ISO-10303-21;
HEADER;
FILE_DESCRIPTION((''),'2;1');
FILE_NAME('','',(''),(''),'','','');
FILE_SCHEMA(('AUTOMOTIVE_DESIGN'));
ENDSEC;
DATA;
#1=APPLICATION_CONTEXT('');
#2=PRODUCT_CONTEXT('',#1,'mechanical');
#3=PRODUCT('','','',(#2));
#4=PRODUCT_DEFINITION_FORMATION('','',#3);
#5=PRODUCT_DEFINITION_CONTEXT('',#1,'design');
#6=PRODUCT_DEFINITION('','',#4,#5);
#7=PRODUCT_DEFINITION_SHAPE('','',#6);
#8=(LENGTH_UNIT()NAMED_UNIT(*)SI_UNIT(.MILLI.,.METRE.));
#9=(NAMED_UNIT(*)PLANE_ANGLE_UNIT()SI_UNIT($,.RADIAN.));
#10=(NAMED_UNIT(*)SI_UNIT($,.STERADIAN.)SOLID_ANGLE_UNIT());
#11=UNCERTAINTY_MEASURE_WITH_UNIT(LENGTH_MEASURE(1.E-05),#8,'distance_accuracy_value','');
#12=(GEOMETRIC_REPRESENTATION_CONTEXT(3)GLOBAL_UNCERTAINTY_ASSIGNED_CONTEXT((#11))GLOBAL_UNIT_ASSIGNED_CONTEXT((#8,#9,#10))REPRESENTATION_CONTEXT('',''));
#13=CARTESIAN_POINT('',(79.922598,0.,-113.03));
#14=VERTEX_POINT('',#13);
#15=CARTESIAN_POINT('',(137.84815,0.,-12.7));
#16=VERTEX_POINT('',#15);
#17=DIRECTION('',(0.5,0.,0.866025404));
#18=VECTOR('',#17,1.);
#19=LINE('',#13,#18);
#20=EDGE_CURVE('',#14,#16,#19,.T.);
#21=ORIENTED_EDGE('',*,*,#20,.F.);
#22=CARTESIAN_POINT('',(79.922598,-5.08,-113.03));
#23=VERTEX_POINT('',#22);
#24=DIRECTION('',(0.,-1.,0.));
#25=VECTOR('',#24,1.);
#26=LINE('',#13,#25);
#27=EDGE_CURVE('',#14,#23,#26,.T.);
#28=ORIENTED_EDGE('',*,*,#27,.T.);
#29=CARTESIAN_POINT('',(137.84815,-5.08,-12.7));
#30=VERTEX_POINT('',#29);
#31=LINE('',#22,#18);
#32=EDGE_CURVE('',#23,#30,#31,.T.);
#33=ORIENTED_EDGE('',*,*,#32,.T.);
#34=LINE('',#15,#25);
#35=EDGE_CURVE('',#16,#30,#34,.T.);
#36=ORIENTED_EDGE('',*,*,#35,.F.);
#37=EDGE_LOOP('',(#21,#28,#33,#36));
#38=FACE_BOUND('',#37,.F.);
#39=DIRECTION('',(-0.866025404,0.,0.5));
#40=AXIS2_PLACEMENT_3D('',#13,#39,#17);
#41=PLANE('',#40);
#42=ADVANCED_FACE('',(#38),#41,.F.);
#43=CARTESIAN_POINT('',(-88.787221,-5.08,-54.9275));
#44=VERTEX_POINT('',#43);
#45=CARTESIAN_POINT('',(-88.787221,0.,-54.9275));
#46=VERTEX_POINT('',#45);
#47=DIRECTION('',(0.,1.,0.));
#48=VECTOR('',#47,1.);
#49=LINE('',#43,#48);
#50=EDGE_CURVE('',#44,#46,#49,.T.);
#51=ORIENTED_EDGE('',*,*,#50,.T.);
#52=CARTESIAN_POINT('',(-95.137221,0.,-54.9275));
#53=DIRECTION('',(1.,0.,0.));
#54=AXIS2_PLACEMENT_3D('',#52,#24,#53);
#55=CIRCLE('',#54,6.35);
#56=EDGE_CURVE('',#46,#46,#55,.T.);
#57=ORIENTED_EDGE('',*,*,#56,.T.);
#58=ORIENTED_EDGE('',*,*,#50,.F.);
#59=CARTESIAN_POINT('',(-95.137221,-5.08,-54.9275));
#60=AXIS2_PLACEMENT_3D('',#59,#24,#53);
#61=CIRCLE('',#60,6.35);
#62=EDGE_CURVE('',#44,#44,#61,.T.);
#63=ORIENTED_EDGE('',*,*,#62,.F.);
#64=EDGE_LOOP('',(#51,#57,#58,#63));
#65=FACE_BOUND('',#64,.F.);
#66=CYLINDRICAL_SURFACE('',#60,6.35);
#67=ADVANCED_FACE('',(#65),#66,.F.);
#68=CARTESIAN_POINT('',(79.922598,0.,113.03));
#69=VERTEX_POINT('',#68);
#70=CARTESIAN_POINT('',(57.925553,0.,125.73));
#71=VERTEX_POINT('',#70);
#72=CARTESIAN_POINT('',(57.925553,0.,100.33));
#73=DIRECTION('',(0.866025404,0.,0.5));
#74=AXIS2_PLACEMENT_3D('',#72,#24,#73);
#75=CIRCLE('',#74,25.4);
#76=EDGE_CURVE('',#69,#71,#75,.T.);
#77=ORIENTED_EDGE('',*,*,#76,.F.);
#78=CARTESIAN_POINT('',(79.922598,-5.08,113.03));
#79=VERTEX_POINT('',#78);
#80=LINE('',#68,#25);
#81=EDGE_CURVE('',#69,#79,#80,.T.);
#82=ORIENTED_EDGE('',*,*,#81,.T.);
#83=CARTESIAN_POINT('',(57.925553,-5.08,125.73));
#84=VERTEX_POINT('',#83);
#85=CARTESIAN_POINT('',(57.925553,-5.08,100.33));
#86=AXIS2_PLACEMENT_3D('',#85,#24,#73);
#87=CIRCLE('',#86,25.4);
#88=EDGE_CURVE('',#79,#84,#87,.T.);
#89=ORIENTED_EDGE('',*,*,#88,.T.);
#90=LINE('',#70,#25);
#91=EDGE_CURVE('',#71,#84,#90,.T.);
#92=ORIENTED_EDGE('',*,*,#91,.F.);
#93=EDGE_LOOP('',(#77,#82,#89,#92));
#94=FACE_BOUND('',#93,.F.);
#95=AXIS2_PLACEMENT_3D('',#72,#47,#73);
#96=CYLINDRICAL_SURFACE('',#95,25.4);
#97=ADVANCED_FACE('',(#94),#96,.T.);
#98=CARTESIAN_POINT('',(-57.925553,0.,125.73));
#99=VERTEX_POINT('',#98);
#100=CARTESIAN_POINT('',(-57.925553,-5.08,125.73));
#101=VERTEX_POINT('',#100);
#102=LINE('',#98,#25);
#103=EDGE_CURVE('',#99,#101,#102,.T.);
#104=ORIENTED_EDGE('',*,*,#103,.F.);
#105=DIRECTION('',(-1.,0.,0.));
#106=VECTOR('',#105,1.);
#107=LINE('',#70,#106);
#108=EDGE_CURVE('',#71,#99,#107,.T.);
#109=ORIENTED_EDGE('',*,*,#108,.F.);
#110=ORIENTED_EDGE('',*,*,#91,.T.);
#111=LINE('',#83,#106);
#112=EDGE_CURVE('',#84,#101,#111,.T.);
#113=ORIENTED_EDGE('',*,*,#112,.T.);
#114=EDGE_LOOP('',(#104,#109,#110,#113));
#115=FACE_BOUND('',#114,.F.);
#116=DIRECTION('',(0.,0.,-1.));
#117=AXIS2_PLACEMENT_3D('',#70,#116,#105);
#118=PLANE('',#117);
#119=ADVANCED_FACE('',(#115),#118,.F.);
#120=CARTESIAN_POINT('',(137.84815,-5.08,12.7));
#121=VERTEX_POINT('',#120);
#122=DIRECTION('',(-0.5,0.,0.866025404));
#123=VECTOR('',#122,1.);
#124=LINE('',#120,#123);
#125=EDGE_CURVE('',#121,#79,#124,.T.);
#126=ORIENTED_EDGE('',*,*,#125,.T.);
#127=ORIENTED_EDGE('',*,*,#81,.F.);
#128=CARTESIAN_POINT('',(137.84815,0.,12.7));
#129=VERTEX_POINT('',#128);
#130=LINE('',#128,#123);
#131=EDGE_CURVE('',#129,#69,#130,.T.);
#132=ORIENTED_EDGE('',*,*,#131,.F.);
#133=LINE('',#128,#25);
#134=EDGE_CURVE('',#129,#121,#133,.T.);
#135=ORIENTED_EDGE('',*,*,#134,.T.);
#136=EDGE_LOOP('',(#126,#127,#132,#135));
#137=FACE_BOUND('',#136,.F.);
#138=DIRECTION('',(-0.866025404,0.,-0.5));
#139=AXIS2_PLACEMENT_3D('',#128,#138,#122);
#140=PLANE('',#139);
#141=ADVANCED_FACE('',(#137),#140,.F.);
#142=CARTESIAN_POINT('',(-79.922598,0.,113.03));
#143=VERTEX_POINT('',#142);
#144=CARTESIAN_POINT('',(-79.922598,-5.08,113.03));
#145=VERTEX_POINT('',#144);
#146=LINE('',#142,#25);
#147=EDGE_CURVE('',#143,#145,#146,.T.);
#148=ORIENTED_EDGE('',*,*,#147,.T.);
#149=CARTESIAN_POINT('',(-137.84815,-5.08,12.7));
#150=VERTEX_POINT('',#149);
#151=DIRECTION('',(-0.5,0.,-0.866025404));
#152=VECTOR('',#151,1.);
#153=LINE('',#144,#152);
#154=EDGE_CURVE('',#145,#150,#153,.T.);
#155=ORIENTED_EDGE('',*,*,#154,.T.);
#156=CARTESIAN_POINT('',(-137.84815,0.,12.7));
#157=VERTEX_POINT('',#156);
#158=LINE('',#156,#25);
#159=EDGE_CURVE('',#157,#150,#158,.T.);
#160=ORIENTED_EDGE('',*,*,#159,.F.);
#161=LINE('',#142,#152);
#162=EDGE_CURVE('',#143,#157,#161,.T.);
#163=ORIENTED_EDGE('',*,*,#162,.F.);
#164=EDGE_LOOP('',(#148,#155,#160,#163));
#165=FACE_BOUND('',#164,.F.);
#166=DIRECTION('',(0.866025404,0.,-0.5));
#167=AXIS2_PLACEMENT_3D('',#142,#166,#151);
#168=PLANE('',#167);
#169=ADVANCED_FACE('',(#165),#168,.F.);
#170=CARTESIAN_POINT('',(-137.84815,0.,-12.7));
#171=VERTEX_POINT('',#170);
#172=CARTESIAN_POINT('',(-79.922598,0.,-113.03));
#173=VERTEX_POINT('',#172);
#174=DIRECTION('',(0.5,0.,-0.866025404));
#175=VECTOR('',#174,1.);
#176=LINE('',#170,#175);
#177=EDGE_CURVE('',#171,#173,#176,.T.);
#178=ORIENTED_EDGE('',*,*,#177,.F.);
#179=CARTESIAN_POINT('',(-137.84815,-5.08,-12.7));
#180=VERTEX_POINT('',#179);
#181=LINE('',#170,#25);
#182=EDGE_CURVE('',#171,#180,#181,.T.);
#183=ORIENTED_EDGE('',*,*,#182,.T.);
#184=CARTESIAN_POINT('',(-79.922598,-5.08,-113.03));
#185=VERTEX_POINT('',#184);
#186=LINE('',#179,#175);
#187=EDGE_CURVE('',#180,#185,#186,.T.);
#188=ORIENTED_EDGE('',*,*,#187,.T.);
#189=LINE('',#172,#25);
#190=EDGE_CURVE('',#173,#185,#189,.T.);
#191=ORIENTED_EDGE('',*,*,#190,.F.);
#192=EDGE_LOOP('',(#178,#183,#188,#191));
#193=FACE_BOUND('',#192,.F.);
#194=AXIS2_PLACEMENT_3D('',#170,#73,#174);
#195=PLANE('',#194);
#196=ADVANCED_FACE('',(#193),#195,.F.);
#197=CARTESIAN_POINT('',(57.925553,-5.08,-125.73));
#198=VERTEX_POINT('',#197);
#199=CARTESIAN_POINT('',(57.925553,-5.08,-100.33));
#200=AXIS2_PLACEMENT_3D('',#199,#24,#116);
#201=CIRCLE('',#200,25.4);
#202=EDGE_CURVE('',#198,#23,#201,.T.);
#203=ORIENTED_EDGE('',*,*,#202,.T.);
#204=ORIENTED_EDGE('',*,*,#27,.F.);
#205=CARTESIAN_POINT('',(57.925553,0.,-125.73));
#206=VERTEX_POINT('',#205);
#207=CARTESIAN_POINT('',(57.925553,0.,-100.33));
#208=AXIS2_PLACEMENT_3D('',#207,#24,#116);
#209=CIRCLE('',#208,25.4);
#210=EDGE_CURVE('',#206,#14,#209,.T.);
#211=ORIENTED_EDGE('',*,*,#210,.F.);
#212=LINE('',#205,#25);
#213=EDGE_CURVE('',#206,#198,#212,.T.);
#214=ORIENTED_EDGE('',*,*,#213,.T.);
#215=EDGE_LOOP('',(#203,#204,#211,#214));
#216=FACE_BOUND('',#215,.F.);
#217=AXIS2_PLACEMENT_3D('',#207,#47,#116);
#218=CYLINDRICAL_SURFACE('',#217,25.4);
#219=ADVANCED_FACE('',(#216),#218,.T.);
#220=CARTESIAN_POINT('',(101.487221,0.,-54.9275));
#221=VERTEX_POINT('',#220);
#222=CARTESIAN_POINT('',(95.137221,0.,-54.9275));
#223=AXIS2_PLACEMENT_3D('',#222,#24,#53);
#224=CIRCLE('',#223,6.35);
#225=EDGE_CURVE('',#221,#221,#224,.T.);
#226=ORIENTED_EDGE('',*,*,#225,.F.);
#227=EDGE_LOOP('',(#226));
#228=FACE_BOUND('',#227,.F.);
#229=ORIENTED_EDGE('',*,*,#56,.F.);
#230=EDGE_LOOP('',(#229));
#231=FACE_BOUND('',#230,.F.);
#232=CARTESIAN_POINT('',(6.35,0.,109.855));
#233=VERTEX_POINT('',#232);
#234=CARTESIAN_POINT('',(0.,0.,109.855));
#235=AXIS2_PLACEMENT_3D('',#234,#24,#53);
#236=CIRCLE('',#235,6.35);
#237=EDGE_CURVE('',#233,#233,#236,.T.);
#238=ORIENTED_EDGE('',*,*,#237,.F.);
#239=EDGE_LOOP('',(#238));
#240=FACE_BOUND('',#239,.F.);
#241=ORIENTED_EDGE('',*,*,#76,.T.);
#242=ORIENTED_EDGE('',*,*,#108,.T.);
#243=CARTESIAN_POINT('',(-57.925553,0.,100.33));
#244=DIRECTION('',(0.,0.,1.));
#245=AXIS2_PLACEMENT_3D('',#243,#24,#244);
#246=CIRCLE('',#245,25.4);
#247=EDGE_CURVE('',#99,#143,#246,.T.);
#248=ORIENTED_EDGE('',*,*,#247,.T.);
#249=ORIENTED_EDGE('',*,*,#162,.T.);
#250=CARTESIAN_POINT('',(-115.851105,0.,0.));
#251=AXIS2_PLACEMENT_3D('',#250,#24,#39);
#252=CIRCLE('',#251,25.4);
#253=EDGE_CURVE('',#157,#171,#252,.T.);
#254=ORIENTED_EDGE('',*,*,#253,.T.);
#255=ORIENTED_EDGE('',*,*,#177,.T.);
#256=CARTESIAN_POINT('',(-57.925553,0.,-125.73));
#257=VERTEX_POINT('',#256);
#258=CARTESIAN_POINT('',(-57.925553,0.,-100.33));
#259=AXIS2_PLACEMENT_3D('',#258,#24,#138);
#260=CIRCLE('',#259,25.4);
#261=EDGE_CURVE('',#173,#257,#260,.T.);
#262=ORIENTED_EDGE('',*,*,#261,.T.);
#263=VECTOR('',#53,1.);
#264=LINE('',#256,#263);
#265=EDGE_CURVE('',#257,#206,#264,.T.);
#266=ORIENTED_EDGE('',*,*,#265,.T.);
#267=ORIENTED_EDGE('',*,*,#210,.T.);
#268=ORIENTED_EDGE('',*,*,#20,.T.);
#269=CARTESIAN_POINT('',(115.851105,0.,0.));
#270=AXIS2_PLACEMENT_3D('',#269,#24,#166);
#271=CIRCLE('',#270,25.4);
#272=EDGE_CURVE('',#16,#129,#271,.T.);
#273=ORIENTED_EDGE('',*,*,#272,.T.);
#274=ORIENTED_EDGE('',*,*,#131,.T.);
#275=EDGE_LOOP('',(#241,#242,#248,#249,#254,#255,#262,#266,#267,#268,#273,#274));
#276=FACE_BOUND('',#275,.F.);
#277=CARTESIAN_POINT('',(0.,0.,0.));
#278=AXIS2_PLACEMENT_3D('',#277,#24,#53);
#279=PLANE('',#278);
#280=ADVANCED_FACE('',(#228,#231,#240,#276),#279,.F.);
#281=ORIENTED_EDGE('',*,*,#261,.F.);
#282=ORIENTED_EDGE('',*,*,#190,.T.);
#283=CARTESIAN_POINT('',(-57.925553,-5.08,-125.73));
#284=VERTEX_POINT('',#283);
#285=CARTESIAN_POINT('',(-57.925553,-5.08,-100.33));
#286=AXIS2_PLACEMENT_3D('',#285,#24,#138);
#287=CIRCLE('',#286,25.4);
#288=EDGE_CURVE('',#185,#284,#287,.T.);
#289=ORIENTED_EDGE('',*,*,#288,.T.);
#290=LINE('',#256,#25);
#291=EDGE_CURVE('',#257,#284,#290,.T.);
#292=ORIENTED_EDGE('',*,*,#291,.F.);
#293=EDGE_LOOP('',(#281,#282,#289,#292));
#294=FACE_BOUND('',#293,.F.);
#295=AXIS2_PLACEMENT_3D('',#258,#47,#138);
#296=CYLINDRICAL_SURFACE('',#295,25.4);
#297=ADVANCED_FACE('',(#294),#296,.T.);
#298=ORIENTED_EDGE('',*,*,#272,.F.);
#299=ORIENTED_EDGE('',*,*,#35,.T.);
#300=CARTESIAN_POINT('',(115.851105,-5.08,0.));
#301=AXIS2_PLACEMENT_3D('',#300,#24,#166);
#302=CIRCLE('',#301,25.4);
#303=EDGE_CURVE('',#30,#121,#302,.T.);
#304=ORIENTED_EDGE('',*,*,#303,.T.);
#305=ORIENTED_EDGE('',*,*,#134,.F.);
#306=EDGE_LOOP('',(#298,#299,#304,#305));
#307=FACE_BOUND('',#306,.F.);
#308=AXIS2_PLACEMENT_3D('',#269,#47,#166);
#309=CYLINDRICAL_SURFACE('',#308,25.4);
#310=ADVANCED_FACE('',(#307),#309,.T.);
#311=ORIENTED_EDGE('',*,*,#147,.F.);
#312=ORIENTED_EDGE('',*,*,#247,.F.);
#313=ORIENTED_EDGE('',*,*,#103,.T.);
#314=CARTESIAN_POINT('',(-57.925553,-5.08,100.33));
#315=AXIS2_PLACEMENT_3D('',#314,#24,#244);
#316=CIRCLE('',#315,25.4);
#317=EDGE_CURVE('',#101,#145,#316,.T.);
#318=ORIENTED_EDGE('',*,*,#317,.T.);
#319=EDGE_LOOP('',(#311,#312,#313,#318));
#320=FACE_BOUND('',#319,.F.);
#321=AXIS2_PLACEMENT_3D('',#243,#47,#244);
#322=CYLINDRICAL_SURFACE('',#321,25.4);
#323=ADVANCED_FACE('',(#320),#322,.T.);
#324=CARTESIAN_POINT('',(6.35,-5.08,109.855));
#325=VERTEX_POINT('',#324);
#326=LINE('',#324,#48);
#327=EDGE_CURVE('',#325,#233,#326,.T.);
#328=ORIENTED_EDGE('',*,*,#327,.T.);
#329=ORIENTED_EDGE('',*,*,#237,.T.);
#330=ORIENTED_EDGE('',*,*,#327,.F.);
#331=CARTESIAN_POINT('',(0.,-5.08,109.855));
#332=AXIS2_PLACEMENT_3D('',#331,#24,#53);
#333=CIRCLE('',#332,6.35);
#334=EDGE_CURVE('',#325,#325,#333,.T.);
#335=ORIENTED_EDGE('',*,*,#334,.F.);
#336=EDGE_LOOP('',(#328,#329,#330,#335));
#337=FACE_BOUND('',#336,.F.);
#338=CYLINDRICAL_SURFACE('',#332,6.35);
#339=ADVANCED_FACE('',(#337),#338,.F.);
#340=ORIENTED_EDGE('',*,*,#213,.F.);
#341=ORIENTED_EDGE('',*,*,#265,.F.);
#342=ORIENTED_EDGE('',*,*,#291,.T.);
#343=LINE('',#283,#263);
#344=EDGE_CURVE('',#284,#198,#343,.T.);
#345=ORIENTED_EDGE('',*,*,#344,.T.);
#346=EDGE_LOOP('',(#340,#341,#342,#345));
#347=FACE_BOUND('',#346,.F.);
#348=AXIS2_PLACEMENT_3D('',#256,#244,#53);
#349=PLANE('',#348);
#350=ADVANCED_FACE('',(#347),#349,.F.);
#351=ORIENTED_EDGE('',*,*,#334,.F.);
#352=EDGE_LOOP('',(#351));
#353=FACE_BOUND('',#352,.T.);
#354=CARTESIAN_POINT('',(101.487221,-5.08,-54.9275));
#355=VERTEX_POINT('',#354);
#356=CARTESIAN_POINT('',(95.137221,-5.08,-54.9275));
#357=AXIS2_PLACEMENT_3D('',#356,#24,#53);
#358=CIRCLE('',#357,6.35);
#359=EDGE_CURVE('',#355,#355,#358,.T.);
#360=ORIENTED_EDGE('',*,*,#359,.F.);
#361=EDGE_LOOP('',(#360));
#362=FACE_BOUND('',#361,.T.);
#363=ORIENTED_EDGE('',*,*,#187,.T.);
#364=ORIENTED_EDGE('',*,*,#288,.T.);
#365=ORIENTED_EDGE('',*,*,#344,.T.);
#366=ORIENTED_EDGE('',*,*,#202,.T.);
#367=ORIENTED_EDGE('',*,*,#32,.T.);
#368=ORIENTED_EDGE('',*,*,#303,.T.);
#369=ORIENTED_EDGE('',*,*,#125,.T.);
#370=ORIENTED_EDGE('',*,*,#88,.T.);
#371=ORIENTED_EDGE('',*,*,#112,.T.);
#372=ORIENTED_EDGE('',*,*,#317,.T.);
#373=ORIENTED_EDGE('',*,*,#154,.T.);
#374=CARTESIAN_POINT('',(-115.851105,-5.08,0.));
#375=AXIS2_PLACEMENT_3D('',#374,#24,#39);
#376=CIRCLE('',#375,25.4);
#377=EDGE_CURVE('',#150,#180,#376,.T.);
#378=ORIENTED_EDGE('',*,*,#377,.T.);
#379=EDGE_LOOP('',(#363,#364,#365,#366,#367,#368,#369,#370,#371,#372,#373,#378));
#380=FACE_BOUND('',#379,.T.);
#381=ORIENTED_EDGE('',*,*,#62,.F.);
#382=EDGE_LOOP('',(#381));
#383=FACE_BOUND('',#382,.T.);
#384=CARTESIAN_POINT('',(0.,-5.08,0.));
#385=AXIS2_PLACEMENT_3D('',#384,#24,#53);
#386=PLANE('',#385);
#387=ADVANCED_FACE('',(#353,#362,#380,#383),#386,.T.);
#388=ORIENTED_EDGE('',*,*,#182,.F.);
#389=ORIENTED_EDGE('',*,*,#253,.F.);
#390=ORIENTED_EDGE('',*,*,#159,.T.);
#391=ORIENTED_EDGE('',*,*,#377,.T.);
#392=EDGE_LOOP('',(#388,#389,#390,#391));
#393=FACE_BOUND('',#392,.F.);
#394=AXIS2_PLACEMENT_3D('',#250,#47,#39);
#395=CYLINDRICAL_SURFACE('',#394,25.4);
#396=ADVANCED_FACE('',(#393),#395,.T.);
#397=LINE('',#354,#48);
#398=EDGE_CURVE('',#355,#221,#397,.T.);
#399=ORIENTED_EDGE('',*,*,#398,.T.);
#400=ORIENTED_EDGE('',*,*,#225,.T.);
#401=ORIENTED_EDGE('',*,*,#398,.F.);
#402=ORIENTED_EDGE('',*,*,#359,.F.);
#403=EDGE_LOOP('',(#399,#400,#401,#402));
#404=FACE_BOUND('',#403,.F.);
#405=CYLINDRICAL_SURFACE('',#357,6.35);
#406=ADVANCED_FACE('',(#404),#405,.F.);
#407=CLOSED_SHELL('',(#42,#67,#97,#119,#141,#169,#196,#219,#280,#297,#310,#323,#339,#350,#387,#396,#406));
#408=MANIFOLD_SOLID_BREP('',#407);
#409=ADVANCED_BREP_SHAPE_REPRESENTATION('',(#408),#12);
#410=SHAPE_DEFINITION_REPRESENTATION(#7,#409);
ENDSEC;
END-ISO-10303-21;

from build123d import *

# Parameters (mm, degrees)
F1_DEPTH = 5.08
F2_R     = 6.35
F3_DEPTH = 5.081


# Not quite as in the source:
# - a feature names something its author has since deleted; it is built from what else it names


with BuildPart() as f1:
    # F0 (on Front) → F1 (new body)
    with BuildSketch(Plane.XZ):
        with BuildLine():
            Line((137.8481502717, 12.7), (79.9225977639, 113.03))
            ThreePointArc((79.9225977639, 113.03), (70.6255525078, 122.3270452561), (57.9255525078, 125.73))
            Line((57.9255525078, 125.73), (-57.9255525078, 125.73))
            ThreePointArc((-57.9255525078, 125.73), (-70.6255525078, 122.3270452561), (-79.9225977639, 113.03))
            Line((-79.9225977639, 113.03), (-137.8481502717, 12.7))
            ThreePointArc((-137.8481502717, 12.7), (-141.2511050156, 0), (-137.8481502717, -12.7))
            Line((-137.8481502717, -12.7), (-79.9225977639, -113.03))
            ThreePointArc((-79.9225977639, -113.03), (-70.6255525078, -122.3270452561), (-57.9255525078, -125.73))
            Line((-57.9255525078, -125.73), (57.9255525078, -125.73))
            ThreePointArc((57.9255525078, -125.73), (70.6255525078, -122.3270452561), (79.9225977639, -113.03))
            Line((79.9225977639, -113.03), (137.8481502717, -12.7))
            ThreePointArc((137.8481502717, -12.7), (141.2511050156, 0), (137.8481502717, 12.7))
        make_face()
    extrude(amount=F1_DEPTH)

    # F2 (on face) → F3 (cut, through all)
    with BuildSketch(Plane.XZ.offset(5.08)):
        with Locations((0, 109.855)):
            Circle(F2_R)
        with Locations((-95.1372207327, -54.9275)):
            Circle(F2_R)
        with Locations((95.1372207327, -54.9275)):
            Circle(F2_R)
    extrude(amount=-F3_DEPTH, mode=Mode.SUBTRACT)


solid = f1.part
